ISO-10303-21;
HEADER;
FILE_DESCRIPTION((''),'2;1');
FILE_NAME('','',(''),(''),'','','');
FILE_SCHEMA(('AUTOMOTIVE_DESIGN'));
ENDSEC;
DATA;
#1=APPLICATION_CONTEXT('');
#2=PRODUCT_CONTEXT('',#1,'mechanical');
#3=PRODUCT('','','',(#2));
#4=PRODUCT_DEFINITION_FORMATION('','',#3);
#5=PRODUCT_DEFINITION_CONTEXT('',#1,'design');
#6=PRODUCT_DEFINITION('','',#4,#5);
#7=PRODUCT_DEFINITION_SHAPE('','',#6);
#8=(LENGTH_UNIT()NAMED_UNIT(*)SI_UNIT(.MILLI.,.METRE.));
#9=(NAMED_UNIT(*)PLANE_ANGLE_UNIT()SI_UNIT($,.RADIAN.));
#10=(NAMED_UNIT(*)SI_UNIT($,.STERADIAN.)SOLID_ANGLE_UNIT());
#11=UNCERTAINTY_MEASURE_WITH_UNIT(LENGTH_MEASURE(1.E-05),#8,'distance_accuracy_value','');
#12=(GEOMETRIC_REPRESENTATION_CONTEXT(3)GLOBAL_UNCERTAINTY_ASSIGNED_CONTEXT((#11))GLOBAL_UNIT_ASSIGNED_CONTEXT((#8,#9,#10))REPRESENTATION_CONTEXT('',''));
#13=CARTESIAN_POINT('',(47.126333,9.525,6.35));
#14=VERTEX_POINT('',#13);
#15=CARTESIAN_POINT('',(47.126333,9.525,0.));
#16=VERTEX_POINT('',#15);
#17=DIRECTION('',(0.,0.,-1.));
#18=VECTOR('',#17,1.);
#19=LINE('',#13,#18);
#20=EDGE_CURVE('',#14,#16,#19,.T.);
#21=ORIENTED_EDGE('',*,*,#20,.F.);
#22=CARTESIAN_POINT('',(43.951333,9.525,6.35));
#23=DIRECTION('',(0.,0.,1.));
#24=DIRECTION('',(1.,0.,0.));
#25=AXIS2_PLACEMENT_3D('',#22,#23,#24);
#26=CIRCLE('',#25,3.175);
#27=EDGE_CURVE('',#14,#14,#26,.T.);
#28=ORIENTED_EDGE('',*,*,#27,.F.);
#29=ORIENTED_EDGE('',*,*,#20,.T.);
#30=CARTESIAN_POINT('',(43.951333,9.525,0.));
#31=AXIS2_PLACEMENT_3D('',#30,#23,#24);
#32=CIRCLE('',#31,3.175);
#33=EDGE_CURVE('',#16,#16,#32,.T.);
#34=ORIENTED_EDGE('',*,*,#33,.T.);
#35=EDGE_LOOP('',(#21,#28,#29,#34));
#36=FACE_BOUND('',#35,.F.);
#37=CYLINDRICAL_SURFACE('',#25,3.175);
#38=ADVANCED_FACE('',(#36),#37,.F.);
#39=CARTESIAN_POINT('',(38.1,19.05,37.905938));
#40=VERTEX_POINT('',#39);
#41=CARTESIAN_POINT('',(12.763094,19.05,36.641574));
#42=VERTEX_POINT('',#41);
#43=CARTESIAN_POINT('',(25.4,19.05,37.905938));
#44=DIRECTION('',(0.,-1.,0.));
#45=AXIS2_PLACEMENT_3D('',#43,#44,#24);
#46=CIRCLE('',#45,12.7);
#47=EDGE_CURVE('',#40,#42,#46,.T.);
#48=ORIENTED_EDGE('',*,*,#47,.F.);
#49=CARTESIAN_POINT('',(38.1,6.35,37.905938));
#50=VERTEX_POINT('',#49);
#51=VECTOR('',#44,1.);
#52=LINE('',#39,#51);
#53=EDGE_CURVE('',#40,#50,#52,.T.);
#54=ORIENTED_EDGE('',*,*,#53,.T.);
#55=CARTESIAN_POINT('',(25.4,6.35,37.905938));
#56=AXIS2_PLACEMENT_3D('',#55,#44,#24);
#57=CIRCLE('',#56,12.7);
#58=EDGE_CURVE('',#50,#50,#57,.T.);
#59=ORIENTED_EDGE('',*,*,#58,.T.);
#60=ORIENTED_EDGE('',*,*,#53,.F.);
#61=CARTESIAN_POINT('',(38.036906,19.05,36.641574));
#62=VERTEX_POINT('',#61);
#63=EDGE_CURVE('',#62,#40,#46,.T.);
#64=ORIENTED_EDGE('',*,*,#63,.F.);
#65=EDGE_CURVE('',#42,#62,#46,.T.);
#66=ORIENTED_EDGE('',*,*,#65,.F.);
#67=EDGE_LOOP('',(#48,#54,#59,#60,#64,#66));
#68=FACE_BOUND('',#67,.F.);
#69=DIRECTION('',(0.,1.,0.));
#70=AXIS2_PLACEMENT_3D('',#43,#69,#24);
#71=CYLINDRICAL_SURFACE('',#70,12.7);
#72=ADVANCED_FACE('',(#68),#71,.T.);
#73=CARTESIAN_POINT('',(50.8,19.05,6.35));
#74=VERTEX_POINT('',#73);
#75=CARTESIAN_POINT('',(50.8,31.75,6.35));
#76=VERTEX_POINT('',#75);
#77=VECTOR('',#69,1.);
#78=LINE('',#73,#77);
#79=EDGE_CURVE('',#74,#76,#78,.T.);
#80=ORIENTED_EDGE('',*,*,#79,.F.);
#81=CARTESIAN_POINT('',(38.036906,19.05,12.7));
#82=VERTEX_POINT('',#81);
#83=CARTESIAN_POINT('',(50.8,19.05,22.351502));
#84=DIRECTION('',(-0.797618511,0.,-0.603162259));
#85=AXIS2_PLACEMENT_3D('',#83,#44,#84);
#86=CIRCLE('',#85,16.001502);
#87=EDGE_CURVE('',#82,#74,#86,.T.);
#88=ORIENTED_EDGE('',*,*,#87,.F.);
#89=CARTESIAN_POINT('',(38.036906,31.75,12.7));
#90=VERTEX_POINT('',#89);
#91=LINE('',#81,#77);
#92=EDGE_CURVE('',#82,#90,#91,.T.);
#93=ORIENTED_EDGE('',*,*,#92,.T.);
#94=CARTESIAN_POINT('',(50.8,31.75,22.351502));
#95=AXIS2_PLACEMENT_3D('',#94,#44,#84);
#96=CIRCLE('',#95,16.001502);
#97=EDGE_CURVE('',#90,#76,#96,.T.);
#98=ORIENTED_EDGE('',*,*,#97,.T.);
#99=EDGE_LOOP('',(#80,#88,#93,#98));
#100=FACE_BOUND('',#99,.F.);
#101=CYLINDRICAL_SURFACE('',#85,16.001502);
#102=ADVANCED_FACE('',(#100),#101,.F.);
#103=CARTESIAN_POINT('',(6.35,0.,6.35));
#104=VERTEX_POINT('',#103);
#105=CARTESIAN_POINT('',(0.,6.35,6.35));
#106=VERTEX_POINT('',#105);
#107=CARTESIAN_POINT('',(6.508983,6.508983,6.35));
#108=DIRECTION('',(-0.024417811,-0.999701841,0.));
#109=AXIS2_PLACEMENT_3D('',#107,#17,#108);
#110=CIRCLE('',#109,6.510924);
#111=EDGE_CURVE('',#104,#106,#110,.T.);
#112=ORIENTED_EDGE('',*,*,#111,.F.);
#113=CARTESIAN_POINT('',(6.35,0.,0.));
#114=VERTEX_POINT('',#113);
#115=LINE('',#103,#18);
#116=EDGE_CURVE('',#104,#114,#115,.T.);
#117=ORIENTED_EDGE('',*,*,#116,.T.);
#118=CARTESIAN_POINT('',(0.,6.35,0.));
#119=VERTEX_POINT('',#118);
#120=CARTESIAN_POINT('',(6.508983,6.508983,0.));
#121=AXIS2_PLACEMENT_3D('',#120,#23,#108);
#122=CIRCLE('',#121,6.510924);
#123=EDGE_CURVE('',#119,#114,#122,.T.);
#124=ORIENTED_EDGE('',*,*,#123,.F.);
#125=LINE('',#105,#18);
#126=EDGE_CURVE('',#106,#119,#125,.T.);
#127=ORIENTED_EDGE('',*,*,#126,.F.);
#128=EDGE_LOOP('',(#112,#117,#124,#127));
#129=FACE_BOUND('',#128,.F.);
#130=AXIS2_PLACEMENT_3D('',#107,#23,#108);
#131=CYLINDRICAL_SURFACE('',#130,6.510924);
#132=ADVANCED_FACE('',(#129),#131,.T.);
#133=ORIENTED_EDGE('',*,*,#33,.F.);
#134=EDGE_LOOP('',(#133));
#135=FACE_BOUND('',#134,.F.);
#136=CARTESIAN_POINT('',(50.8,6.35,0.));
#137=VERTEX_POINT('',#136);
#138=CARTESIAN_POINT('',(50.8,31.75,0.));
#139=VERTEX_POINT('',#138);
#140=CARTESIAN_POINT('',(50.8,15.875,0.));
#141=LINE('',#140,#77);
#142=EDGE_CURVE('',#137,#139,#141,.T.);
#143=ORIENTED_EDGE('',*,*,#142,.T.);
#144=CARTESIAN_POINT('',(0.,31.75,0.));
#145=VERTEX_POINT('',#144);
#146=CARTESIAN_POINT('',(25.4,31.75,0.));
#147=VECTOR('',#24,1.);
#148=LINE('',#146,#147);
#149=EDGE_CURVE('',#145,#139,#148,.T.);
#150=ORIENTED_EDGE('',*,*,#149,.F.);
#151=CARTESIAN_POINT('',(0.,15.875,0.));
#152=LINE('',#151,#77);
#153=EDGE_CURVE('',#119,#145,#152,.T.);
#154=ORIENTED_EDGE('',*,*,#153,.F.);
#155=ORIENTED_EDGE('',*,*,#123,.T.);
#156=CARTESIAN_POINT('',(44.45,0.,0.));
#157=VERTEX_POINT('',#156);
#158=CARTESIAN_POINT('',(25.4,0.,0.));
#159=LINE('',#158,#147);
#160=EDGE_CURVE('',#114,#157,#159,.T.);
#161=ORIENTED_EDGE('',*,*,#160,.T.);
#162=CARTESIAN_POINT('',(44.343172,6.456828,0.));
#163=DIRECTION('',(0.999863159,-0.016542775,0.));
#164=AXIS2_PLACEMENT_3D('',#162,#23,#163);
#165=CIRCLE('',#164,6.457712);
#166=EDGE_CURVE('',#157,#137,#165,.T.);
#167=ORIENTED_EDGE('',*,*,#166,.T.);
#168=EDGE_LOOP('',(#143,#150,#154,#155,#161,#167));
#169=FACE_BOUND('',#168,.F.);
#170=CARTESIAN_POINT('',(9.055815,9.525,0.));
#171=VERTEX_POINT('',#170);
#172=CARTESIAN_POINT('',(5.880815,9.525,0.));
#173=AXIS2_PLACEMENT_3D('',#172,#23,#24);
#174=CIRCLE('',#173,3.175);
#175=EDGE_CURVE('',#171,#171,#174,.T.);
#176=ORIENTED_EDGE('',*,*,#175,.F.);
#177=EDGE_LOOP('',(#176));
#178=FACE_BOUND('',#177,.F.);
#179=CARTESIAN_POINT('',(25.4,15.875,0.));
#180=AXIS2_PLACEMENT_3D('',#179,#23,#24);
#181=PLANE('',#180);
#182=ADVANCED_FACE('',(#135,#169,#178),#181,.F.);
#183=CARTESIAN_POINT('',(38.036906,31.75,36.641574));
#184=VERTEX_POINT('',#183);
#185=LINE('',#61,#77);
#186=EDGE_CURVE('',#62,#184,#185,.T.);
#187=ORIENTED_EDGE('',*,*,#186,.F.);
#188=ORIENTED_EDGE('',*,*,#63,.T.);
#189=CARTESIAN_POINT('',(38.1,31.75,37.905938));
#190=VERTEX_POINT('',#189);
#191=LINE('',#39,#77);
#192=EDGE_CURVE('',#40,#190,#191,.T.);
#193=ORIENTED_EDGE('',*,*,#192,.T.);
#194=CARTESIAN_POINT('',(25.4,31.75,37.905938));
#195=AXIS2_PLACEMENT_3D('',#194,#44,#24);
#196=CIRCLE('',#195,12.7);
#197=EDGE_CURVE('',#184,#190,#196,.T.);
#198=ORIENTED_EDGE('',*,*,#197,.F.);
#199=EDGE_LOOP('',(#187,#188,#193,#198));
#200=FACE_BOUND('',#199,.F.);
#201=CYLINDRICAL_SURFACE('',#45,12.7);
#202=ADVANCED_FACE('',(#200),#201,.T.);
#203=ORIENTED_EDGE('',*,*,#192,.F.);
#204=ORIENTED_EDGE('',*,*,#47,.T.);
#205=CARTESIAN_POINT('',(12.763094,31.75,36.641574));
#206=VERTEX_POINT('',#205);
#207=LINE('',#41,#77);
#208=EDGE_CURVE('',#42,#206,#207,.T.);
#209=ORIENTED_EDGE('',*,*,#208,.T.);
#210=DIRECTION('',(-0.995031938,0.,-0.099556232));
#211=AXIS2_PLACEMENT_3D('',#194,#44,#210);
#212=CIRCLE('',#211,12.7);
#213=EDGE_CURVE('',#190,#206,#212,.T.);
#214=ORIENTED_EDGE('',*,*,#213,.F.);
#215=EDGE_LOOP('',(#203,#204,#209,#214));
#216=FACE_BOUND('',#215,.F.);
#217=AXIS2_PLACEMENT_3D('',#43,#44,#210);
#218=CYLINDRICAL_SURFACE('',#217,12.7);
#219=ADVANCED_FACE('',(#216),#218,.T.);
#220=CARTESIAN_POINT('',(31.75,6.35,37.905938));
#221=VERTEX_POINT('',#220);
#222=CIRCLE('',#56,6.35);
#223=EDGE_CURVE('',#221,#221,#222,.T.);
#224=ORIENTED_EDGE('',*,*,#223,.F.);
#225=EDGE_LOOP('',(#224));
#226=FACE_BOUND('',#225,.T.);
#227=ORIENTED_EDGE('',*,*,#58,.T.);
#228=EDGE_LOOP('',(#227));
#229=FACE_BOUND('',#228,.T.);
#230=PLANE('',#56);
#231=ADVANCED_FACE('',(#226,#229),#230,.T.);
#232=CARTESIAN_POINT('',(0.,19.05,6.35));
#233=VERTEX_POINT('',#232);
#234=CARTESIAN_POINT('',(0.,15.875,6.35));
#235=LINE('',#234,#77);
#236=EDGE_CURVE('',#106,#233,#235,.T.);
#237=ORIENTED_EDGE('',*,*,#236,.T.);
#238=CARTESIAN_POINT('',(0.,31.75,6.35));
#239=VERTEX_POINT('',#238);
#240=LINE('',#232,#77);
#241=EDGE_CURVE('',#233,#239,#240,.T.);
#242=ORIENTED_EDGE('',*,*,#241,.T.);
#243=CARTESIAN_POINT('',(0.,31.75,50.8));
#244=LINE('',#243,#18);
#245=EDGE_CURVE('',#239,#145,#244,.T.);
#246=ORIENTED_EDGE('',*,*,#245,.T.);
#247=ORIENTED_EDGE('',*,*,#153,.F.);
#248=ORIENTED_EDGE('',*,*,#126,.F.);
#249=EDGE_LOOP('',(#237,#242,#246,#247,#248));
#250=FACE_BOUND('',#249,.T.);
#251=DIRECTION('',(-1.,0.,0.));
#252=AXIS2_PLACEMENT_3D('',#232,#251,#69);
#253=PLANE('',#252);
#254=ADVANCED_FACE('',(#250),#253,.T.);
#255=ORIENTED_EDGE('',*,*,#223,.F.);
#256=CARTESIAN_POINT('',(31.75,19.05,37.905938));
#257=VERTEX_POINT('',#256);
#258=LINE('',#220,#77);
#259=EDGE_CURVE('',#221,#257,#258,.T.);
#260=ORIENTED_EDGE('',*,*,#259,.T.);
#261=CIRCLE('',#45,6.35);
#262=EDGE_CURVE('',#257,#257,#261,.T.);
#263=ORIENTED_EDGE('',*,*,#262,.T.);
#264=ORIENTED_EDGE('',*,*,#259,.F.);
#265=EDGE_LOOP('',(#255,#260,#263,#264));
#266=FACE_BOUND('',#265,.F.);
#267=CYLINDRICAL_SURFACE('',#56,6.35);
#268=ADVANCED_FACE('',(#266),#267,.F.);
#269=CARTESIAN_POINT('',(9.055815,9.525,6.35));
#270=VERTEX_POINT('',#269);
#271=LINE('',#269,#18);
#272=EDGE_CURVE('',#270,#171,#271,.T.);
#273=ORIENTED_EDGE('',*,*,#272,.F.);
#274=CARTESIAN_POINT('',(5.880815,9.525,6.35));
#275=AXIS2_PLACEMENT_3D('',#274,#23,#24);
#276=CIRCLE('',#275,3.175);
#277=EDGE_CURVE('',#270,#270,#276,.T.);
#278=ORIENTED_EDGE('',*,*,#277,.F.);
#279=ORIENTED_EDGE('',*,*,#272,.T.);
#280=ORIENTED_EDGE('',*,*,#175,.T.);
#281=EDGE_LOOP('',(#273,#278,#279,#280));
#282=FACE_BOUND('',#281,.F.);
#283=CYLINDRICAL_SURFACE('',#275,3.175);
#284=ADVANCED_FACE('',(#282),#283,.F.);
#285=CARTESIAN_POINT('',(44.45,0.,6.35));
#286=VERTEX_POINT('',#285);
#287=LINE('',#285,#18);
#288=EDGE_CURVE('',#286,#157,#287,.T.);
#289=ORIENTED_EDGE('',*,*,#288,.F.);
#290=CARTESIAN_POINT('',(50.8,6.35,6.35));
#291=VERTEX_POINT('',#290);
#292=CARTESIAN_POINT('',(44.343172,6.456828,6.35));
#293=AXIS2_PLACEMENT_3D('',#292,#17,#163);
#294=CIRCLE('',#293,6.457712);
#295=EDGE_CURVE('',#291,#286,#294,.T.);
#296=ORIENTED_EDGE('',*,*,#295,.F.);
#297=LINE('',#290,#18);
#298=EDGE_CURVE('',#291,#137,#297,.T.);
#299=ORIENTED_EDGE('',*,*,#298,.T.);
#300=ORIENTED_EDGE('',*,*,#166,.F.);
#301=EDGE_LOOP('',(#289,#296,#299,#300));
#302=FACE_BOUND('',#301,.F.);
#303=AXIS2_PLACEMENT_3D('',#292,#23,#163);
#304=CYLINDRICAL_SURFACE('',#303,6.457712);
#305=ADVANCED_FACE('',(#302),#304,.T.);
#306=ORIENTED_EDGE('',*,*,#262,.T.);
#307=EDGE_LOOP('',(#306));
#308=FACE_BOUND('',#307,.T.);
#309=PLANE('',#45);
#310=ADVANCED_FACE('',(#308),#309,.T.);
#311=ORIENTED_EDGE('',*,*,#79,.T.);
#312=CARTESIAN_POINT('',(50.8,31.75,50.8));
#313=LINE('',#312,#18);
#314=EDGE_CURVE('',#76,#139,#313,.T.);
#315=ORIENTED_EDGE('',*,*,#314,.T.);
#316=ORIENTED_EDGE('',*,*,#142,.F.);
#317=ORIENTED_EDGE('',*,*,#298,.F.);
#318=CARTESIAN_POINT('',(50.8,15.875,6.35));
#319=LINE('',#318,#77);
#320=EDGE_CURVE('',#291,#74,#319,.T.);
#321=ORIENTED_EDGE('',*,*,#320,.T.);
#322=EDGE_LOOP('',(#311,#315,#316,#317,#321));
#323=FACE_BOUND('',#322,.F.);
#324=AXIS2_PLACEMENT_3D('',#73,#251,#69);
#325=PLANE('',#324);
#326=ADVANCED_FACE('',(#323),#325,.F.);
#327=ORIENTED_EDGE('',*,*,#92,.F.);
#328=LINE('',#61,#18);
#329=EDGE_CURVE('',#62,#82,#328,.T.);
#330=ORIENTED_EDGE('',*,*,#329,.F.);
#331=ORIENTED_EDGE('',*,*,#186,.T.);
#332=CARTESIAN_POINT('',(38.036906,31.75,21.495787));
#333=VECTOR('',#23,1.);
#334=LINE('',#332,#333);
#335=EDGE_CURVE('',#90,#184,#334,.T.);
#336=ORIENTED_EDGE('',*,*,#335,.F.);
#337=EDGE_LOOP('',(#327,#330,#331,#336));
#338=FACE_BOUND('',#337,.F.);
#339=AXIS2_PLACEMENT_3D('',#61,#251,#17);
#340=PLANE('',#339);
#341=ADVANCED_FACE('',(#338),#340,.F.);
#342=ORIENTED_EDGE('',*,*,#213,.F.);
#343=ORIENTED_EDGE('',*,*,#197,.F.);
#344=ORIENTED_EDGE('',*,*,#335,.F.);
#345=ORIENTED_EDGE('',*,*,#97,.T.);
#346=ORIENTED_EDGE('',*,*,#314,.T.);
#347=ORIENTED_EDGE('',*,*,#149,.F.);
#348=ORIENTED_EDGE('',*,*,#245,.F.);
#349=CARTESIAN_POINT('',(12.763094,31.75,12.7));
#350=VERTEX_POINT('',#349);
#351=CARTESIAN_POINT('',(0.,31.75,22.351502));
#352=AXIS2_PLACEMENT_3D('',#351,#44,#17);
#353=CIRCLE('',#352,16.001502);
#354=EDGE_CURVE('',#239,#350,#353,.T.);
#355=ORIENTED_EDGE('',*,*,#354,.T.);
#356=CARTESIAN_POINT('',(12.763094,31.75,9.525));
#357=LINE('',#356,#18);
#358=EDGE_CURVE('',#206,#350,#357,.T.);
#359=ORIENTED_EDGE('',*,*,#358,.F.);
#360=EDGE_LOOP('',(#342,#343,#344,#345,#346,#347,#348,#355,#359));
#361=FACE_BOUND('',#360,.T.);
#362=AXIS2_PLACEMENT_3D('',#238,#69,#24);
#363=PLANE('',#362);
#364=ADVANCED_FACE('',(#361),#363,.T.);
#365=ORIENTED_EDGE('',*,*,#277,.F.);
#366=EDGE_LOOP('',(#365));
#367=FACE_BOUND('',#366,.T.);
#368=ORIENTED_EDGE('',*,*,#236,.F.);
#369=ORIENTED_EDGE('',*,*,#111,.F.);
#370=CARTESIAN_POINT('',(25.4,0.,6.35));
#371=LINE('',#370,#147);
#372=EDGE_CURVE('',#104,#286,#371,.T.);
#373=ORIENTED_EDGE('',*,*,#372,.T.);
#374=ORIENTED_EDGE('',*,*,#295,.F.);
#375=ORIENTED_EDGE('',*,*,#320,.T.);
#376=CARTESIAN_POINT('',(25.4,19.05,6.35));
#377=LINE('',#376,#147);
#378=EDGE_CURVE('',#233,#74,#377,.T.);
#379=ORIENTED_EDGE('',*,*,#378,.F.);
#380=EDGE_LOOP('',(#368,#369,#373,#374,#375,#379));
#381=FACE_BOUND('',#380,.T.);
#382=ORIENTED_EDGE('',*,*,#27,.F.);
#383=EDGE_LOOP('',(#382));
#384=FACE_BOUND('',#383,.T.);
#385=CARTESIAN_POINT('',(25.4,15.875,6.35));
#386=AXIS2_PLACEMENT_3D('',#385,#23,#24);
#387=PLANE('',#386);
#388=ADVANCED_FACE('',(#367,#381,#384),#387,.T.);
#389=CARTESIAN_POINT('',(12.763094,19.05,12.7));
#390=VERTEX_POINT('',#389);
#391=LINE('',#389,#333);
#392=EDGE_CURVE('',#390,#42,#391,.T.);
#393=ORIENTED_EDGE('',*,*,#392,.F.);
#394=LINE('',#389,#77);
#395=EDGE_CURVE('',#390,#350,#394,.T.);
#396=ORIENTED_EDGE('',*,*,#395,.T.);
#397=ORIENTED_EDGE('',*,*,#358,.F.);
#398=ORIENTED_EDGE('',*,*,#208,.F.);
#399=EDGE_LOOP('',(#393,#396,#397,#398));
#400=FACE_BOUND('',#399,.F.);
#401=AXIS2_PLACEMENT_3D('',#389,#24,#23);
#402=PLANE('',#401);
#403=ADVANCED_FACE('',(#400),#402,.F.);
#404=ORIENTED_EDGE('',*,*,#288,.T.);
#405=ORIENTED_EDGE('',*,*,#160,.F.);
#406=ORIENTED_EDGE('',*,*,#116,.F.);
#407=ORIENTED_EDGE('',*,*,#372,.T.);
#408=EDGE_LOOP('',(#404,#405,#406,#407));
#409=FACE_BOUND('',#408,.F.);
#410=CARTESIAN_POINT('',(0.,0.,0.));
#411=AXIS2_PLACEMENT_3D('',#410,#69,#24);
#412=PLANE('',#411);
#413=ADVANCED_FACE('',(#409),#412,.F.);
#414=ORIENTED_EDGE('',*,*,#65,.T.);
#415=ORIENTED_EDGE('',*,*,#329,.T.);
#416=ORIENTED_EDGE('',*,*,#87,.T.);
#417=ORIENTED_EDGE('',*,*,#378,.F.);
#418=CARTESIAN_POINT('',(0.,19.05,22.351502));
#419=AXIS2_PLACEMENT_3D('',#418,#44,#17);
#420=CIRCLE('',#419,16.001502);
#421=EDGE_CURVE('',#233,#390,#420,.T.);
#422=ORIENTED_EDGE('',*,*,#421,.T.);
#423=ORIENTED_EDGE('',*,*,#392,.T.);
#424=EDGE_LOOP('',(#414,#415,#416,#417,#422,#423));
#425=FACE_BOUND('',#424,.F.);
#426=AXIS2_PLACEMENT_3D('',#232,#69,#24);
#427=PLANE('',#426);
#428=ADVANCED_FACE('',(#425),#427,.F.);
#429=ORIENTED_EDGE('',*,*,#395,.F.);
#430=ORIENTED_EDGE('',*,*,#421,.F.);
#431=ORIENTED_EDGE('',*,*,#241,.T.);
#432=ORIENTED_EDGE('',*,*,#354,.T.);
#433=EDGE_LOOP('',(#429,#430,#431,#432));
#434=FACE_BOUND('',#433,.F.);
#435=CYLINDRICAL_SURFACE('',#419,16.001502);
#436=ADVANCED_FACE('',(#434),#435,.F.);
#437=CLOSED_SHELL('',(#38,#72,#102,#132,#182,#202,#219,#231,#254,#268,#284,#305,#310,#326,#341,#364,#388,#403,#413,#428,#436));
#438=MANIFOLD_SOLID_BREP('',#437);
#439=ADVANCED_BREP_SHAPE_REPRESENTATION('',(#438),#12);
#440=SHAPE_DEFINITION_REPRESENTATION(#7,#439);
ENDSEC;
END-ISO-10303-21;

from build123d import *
from build123d import SkipClean  # not in build123d's __all__

# Parameters (mm, degrees)
F0_W      = 50.8
F0_H      = 31.75
F1_DEPTH  = 6.35
F2_W      = 50.8
F2_H      = 12.7
F3_DEPTH  = 44.45
F4_R      = 12.7
F5_DEPTH  = 12.7
F6_R      = 6.35
F7_DEPTH  = 12.7
F8_R      = 3.175
F9_DEPTH  = 25.4
F11_DEPTH = 25.4
F13_DEPTH = 25.4


with BuildPart() as f1:
    # F0 (on Top) → F1 (new body)
    with BuildSketch(Plane.XY):
        with Locations((25.4, 15.875)):
            Rectangle(F0_W, F0_H)
    extrude(amount=F1_DEPTH)

    # F2 (on face) → F3 (join)
    with BuildSketch(Plane.XY.offset(6.35)):
        with Locations((25.4, 25.4)):
            Rectangle(F2_W, F2_H)
    extrude(amount=F3_DEPTH)

    # F4 (on face) → F5 (join)
    with BuildSketch(Plane.XZ.offset(-19.05)):
        with Locations((25.4, 37.9059378386)):
            Circle(F4_R)
    extrude(amount=F5_DEPTH)

    # F6 (on face) → F7 (cut)
    with BuildSketch(Plane.XZ.offset(-6.35)):
        with Locations((25.4, 37.9059378386)):
            Circle(F6_R)
    extrude(amount=-F7_DEPTH, mode=Mode.SUBTRACT)

    # F8 (on face) → F9 (cut)
    with BuildSketch(Plane.XY.offset(6.35)):
        with Locations((5.8808145113, 9.525)):
            Circle(F8_R)
        with Locations((43.9513325691, 9.525)):
            Circle(F8_R)
    extrude(amount=-F9_DEPTH, mode=Mode.SUBTRACT)

    # F10 (on face) → F11 (cut)
    with BuildSketch(Plane.XY.offset(6.35)):
        with BuildLine():
            ThreePointArc((50.8, 6.35), (48.9094635793, 1.8905364207), (44.45, 0))
            Line((44.45, 0), (50.8, 0))
            Line((50.8, 0), (50.8, 6.35))
        make_face()
        with BuildLine():
            ThreePointArc((6.35, 0), (1.9050641376, 1.9050641376), (0, 6.35))
            Line((0, 6.35), (0, 0))
            Line((0, 0), (6.35, 0))
        make_face()
    extrude(amount=-F11_DEPTH, mode=Mode.SUBTRACT)

    # F12 (on face) → F13 (cut)
    with BuildSketch(Plane.XZ.offset(-19.05)):
        with BuildLine():
            ThreePointArc((38.1, 37.9059378386), (38.084216594, 37.2729691208), (38.0369056067, 36.6415736948))
            Line((38.0369056067, 36.6415736948), (38.0369056067, 12.7))
            ThreePointArc((38.0369056067, 12.7), (43.6722535382, 8.0251871407), (50.8, 6.35))
            Line((50.8, 6.35), (50.8, 50.8))
            Line((50.8, 50.8), (0, 50.8))
            Line((0, 50.8), (0, 6.35))
            ThreePointArc((0, 6.35), (7.1277464618, 8.0251871407), (12.7630943933, 12.7))
            Line((12.7630943933, 12.7), (12.7630943933, 36.6415736948))
            ThreePointArc((12.7630943933, 36.6415736948), (24.7670312823, 50.5901544325), (38.1, 37.9059378386))
        make_face()
    with SkipClean():  # cleaning this boolean's faces spoils the solid; the shape is the same uncleaned
        extrude(amount=-F13_DEPTH, mode=Mode.SUBTRACT)


solid = f1.part
